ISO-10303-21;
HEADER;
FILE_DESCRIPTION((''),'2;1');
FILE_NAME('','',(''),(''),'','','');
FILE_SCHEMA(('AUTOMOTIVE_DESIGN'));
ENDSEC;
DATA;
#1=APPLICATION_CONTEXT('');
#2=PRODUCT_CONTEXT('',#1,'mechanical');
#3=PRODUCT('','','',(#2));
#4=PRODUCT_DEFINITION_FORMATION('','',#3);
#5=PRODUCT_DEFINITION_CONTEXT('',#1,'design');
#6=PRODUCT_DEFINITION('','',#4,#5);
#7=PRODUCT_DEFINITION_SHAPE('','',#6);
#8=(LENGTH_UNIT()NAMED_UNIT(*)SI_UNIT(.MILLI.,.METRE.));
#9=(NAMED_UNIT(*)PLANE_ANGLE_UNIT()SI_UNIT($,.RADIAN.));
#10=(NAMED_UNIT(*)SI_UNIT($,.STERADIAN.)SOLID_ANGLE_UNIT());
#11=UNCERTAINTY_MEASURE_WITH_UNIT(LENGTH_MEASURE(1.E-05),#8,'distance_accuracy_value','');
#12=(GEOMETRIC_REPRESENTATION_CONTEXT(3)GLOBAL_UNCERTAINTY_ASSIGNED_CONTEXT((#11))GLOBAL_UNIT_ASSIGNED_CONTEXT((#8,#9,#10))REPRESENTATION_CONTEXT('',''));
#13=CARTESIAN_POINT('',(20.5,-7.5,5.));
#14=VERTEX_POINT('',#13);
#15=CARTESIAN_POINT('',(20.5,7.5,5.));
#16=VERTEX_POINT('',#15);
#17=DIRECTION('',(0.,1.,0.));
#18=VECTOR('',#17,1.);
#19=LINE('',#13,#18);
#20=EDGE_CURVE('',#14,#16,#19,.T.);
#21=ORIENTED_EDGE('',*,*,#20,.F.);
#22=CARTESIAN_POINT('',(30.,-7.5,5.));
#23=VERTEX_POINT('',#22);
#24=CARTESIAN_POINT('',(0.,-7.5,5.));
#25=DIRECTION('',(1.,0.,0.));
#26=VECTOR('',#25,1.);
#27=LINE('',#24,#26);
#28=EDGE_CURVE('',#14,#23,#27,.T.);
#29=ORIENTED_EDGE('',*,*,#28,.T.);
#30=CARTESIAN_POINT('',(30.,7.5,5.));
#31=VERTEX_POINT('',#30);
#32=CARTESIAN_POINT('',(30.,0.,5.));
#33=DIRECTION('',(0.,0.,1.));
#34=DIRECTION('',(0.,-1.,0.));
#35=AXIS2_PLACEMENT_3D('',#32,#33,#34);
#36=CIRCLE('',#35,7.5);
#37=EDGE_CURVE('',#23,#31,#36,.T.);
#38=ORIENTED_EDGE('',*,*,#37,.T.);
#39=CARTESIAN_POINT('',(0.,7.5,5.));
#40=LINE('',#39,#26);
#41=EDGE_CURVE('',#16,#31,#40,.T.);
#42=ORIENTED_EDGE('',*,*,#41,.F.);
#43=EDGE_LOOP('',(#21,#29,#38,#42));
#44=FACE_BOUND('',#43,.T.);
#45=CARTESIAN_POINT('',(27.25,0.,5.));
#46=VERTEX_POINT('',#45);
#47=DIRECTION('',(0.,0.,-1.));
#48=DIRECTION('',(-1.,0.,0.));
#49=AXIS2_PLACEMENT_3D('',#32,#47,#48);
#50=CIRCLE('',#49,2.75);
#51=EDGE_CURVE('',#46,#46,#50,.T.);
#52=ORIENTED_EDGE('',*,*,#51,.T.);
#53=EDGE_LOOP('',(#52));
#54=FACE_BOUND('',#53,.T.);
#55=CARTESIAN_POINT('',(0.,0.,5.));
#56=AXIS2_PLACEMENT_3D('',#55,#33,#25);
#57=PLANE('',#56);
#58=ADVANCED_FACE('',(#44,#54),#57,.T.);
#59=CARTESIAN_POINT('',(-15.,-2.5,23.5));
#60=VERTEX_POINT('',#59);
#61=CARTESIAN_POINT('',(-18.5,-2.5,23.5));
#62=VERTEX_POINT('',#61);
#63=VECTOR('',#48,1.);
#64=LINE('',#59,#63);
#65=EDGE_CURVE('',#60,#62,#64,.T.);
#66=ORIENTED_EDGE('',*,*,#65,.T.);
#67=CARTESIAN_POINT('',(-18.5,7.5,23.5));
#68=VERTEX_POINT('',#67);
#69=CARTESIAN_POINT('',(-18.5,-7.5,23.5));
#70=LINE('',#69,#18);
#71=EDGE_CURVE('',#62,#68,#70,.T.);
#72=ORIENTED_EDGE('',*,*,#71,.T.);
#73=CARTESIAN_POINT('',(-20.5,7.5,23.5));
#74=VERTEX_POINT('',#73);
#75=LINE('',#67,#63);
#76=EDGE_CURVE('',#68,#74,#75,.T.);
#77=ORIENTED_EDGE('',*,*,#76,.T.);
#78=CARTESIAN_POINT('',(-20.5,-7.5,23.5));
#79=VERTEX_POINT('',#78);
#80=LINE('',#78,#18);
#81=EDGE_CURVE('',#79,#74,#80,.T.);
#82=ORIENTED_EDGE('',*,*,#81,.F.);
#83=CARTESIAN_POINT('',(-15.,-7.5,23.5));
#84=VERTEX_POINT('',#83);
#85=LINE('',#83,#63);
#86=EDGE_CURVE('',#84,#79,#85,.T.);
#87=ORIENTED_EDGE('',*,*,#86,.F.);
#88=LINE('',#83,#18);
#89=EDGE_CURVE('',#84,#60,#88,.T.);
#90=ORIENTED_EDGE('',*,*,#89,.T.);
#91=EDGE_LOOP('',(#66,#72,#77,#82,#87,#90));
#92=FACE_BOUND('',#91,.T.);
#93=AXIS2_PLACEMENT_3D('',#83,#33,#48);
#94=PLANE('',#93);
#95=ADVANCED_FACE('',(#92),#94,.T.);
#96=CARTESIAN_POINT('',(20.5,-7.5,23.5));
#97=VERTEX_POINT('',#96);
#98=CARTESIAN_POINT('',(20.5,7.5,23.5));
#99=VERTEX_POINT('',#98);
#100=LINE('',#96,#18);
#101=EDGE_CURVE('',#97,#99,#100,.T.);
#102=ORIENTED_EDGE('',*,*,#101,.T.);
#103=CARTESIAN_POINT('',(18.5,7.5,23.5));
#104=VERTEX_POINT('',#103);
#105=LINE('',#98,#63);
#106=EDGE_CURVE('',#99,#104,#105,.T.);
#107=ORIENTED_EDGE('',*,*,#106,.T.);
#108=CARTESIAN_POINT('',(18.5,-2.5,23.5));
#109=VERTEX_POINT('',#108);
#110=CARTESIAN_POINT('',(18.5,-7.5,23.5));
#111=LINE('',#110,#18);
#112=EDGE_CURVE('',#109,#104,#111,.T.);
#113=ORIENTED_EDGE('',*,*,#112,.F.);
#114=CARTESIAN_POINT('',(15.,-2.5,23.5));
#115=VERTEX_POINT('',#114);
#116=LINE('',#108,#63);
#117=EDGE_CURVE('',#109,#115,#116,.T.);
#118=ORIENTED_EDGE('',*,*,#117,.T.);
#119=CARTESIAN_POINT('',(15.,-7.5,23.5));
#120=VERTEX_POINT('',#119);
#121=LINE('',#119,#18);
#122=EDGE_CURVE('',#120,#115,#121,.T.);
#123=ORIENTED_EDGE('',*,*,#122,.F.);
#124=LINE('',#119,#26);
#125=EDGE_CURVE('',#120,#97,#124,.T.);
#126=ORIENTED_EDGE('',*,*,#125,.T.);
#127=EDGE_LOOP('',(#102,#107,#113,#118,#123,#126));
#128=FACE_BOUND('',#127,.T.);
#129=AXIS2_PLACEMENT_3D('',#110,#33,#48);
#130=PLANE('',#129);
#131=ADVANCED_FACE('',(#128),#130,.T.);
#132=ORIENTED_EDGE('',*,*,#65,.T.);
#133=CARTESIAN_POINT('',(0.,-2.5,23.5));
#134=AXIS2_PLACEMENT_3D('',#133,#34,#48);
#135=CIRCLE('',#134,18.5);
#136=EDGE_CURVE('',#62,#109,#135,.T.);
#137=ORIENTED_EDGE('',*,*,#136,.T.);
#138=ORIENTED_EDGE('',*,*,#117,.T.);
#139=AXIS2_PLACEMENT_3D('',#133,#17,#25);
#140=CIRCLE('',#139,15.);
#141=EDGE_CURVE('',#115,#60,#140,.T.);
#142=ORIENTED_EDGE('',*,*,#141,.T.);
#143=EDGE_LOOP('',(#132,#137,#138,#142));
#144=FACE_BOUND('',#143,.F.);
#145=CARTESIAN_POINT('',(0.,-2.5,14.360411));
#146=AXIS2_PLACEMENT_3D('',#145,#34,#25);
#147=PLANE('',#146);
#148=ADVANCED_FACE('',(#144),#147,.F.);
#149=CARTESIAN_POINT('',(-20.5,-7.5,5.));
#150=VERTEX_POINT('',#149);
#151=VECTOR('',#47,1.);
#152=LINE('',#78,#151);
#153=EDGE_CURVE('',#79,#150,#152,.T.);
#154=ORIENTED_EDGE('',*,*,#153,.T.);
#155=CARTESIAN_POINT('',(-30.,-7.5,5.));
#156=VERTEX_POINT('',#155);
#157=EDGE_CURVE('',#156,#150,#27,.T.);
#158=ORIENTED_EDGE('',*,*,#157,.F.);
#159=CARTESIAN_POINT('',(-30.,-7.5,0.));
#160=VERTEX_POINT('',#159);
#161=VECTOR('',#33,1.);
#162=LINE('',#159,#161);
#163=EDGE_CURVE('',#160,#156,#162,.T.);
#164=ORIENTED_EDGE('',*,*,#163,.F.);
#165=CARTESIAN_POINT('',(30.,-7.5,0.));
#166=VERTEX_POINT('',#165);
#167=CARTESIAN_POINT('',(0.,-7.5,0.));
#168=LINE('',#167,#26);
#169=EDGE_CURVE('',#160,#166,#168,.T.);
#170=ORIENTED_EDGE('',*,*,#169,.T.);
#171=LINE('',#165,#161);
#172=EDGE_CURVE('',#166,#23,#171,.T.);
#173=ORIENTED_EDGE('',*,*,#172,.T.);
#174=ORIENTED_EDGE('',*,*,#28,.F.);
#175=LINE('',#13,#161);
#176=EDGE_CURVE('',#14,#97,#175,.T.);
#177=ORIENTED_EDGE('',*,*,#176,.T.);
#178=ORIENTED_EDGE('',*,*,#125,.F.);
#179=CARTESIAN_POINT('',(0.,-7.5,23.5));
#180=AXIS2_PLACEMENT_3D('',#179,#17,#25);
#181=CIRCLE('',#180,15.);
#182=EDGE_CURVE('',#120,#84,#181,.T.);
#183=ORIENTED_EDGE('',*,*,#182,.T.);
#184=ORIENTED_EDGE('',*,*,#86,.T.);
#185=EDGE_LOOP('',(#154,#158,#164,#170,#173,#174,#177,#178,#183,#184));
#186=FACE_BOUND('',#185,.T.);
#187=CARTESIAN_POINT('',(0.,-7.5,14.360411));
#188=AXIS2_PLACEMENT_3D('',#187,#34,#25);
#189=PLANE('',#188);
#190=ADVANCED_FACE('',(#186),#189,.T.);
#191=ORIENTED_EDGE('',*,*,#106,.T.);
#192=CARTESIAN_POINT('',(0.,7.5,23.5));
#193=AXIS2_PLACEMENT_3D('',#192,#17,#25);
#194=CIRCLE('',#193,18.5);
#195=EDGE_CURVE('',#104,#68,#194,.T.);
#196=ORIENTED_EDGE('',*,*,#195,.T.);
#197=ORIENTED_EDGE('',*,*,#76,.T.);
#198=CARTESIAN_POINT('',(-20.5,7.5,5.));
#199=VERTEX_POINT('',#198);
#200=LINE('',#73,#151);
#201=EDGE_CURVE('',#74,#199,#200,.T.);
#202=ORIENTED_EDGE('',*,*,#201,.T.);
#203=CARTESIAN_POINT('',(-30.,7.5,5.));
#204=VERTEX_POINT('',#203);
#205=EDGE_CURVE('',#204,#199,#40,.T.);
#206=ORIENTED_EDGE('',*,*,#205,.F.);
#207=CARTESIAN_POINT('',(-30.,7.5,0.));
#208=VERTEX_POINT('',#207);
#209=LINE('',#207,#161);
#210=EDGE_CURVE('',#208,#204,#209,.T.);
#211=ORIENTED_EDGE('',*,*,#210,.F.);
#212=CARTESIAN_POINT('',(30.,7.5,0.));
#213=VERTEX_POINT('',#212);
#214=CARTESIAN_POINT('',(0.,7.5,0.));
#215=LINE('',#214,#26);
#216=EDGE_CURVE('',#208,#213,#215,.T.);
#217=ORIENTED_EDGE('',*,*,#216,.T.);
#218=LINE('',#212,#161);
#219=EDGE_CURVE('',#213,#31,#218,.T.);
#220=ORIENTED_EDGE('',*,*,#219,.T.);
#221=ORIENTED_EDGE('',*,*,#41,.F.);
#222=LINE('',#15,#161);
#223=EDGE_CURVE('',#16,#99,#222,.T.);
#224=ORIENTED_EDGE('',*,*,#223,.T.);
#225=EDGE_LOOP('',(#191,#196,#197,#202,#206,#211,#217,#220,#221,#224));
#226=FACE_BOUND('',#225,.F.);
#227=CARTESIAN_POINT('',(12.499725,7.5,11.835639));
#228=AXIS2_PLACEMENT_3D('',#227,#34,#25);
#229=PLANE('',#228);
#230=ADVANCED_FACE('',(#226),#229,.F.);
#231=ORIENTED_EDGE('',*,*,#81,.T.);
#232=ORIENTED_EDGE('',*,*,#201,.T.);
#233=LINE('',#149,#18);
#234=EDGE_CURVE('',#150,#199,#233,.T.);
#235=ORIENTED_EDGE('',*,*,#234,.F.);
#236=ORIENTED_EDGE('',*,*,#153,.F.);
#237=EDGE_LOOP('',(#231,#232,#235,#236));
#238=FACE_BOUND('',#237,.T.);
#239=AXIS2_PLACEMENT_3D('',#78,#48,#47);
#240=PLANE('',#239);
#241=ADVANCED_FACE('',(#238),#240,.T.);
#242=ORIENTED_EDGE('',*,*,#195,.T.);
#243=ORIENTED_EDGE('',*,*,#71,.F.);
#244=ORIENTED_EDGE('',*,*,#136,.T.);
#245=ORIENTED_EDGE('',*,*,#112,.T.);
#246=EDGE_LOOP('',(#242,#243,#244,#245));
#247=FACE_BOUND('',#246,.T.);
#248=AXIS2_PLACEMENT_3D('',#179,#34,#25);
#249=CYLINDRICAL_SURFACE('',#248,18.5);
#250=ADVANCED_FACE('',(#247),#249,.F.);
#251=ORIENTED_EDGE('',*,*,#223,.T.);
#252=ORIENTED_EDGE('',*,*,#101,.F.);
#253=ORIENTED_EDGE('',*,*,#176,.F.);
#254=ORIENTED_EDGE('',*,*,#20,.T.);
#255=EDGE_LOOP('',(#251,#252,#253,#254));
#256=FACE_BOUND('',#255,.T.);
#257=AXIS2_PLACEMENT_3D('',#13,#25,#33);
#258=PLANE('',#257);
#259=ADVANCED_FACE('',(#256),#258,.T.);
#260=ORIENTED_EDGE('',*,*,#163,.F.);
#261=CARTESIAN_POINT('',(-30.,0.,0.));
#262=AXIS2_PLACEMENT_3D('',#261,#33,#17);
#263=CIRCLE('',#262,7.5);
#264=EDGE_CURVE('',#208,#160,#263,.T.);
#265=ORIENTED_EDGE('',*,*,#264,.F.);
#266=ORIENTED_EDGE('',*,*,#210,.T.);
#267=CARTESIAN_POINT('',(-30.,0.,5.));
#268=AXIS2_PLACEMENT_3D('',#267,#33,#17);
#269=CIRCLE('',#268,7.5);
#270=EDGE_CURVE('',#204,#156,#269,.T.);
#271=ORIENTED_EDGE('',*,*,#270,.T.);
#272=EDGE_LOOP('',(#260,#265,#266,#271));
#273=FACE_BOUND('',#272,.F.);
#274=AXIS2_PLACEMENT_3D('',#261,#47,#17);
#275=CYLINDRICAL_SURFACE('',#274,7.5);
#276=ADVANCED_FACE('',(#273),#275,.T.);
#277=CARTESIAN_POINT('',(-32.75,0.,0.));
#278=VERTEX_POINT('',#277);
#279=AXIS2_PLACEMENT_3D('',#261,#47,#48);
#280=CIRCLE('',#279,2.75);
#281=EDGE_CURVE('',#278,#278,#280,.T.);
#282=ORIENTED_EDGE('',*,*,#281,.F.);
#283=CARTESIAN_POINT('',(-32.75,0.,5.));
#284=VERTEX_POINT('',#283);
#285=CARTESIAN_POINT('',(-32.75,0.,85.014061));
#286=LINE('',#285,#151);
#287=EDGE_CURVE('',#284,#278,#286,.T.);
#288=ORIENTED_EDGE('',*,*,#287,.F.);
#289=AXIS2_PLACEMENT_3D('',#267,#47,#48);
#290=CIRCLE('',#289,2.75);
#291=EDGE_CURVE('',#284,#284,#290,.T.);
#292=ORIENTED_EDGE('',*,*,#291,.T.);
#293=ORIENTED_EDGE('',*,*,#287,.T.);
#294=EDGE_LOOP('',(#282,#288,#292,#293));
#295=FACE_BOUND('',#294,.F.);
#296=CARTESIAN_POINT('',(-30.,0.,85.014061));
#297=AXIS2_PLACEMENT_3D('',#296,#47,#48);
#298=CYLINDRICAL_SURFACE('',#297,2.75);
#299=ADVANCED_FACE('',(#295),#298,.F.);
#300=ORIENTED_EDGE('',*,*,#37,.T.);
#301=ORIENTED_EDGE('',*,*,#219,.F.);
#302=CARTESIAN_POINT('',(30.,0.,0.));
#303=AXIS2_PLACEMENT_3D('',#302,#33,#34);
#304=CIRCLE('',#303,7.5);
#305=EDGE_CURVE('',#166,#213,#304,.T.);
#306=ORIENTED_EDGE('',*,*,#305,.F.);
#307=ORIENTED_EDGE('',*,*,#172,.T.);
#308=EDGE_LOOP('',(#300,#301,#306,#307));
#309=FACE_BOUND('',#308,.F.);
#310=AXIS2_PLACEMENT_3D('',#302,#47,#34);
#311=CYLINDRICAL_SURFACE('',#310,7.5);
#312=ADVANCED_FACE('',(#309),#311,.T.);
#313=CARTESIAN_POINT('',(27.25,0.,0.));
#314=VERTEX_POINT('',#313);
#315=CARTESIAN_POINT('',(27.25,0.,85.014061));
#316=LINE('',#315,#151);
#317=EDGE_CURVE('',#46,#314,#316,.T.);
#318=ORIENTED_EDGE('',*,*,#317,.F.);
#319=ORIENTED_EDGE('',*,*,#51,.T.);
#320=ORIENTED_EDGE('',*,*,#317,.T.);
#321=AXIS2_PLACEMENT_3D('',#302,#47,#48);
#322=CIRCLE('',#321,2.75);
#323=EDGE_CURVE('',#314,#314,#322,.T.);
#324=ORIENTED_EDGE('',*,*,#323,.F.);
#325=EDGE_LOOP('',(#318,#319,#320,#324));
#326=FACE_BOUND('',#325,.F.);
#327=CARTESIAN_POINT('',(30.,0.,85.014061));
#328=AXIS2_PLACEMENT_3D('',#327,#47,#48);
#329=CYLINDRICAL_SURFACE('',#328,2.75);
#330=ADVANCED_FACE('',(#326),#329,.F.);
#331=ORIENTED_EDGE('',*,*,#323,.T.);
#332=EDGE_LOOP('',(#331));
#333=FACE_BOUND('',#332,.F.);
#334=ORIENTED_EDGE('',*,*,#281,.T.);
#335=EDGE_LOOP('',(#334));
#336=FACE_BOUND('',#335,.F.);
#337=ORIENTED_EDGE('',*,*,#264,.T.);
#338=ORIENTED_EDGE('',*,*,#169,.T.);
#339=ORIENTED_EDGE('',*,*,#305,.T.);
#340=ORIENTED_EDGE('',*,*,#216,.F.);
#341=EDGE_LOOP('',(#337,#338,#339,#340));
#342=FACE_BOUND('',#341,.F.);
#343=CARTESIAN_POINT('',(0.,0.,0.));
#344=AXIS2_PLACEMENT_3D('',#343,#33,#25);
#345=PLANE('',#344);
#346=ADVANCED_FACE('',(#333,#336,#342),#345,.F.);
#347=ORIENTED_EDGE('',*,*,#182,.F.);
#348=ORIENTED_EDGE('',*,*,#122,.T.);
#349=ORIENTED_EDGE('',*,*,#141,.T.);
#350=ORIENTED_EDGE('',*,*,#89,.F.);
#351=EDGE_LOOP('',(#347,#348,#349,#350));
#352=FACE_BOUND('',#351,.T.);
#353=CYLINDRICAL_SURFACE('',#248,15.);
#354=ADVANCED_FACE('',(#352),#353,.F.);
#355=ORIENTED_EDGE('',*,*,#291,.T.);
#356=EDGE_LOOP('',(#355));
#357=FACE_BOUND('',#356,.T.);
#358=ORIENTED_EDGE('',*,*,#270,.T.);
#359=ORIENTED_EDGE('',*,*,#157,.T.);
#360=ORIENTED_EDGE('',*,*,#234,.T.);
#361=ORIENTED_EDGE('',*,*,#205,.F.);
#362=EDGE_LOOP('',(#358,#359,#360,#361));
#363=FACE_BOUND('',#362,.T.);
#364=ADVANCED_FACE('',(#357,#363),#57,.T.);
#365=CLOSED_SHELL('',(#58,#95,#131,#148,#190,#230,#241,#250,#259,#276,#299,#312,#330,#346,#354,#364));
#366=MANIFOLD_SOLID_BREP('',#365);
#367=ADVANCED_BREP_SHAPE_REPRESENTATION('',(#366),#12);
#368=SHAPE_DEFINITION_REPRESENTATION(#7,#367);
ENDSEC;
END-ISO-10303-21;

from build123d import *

# Parameters (mm, degrees)
F0_W     = 60
F0_H     = 15
F1_DEPTH = 5
F3_DEPTH = 15
F4_DEPTH = 5
F6_D     = 5.5


with BuildPart() as f1:
    # F0 (on Top) → F1 (new body)
    with BuildSketch(Plane.XY):
        Rectangle(F0_W, F0_H)
        with BuildLine():
            Line((-30, -7.5), (-30, 7.5))
            ThreePointArc((-30, 7.5), (-37.5, 0), (-30, -7.5))
        make_face()
        with BuildLine():
            ThreePointArc((30, -7.5), (37.5, 0), (30, 7.5))
            Line((30, 7.5), (30, -7.5))
        make_face()
    extrude(amount=F1_DEPTH)

    # F2 (on face) → F3 (join)
    with BuildSketch(Plane.XZ.offset(7.5)):
        with BuildLine():
            Line((20.5, 23.5), (18.5, 23.5))
            ThreePointArc((18.5, 23.5), (13.0814754325, 10.4185245286), (-5.51e-08, 5))
            Line((-5.51e-08, 5), (8.8317608663, 5))
            ThreePointArc((8.8317608663, 5), (17.3392776343, 12.5638466031), (20.5, 23.5))
        make_face()
        with BuildLine():
            ThreePointArc((-5.51e-08, 5), (-13.0814754714, 10.4185245675), (-18.5, 23.5))
            Line((-18.5, 23.5), (-20.5, 23.5))
            ThreePointArc((-20.5, 23.5), (-17.3392776343, 12.5638466031), (-8.8317608663, 5))
            Line((-8.8317608663, 5), (-5.51e-08, 5))
        make_face()
        with BuildLine():
            Line((20.5, 5), (20.5, 23.5))
            ThreePointArc((20.5, 23.5), (17.3392776343, 12.5638466031), (8.8317608663, 5))
            Line((8.8317608663, 5), (20.5, 5))
        make_face()
        with BuildLine():
            ThreePointArc((-8.8317608663, 5), (-17.3392776343, 12.5638466031), (-20.5, 23.5))
            Line((-20.5, 23.5), (-20.5, 5))
            Line((-20.5, 5), (-8.8317608663, 5))
        make_face()
    extrude(amount=-F3_DEPTH)

    # F2 (on face) → F4 (join)
    with BuildSketch(Plane.XZ.offset(7.5)):
        with BuildLine():
            ThreePointArc((-5.51e-08, 5), (13.0814754325, 10.4185245286), (18.5, 23.5))
            Line((18.5, 23.5), (15, 23.5))
            ThreePointArc((15, 23.5), (0, 8.5), (-15, 23.5))
            Line((-15, 23.5), (-18.5, 23.5))
            ThreePointArc((-18.5, 23.5), (-13.0814754714, 10.4185245675), (-5.51e-08, 5))
        make_face()
    extrude(amount=-F4_DEPTH)

    # F6 (through all)
    with Locations(Plane.XY.offset(5)):
        with Locations((30, 0), (-30, 0)):
            Hole(F6_D / 2)


solid = f1.part
